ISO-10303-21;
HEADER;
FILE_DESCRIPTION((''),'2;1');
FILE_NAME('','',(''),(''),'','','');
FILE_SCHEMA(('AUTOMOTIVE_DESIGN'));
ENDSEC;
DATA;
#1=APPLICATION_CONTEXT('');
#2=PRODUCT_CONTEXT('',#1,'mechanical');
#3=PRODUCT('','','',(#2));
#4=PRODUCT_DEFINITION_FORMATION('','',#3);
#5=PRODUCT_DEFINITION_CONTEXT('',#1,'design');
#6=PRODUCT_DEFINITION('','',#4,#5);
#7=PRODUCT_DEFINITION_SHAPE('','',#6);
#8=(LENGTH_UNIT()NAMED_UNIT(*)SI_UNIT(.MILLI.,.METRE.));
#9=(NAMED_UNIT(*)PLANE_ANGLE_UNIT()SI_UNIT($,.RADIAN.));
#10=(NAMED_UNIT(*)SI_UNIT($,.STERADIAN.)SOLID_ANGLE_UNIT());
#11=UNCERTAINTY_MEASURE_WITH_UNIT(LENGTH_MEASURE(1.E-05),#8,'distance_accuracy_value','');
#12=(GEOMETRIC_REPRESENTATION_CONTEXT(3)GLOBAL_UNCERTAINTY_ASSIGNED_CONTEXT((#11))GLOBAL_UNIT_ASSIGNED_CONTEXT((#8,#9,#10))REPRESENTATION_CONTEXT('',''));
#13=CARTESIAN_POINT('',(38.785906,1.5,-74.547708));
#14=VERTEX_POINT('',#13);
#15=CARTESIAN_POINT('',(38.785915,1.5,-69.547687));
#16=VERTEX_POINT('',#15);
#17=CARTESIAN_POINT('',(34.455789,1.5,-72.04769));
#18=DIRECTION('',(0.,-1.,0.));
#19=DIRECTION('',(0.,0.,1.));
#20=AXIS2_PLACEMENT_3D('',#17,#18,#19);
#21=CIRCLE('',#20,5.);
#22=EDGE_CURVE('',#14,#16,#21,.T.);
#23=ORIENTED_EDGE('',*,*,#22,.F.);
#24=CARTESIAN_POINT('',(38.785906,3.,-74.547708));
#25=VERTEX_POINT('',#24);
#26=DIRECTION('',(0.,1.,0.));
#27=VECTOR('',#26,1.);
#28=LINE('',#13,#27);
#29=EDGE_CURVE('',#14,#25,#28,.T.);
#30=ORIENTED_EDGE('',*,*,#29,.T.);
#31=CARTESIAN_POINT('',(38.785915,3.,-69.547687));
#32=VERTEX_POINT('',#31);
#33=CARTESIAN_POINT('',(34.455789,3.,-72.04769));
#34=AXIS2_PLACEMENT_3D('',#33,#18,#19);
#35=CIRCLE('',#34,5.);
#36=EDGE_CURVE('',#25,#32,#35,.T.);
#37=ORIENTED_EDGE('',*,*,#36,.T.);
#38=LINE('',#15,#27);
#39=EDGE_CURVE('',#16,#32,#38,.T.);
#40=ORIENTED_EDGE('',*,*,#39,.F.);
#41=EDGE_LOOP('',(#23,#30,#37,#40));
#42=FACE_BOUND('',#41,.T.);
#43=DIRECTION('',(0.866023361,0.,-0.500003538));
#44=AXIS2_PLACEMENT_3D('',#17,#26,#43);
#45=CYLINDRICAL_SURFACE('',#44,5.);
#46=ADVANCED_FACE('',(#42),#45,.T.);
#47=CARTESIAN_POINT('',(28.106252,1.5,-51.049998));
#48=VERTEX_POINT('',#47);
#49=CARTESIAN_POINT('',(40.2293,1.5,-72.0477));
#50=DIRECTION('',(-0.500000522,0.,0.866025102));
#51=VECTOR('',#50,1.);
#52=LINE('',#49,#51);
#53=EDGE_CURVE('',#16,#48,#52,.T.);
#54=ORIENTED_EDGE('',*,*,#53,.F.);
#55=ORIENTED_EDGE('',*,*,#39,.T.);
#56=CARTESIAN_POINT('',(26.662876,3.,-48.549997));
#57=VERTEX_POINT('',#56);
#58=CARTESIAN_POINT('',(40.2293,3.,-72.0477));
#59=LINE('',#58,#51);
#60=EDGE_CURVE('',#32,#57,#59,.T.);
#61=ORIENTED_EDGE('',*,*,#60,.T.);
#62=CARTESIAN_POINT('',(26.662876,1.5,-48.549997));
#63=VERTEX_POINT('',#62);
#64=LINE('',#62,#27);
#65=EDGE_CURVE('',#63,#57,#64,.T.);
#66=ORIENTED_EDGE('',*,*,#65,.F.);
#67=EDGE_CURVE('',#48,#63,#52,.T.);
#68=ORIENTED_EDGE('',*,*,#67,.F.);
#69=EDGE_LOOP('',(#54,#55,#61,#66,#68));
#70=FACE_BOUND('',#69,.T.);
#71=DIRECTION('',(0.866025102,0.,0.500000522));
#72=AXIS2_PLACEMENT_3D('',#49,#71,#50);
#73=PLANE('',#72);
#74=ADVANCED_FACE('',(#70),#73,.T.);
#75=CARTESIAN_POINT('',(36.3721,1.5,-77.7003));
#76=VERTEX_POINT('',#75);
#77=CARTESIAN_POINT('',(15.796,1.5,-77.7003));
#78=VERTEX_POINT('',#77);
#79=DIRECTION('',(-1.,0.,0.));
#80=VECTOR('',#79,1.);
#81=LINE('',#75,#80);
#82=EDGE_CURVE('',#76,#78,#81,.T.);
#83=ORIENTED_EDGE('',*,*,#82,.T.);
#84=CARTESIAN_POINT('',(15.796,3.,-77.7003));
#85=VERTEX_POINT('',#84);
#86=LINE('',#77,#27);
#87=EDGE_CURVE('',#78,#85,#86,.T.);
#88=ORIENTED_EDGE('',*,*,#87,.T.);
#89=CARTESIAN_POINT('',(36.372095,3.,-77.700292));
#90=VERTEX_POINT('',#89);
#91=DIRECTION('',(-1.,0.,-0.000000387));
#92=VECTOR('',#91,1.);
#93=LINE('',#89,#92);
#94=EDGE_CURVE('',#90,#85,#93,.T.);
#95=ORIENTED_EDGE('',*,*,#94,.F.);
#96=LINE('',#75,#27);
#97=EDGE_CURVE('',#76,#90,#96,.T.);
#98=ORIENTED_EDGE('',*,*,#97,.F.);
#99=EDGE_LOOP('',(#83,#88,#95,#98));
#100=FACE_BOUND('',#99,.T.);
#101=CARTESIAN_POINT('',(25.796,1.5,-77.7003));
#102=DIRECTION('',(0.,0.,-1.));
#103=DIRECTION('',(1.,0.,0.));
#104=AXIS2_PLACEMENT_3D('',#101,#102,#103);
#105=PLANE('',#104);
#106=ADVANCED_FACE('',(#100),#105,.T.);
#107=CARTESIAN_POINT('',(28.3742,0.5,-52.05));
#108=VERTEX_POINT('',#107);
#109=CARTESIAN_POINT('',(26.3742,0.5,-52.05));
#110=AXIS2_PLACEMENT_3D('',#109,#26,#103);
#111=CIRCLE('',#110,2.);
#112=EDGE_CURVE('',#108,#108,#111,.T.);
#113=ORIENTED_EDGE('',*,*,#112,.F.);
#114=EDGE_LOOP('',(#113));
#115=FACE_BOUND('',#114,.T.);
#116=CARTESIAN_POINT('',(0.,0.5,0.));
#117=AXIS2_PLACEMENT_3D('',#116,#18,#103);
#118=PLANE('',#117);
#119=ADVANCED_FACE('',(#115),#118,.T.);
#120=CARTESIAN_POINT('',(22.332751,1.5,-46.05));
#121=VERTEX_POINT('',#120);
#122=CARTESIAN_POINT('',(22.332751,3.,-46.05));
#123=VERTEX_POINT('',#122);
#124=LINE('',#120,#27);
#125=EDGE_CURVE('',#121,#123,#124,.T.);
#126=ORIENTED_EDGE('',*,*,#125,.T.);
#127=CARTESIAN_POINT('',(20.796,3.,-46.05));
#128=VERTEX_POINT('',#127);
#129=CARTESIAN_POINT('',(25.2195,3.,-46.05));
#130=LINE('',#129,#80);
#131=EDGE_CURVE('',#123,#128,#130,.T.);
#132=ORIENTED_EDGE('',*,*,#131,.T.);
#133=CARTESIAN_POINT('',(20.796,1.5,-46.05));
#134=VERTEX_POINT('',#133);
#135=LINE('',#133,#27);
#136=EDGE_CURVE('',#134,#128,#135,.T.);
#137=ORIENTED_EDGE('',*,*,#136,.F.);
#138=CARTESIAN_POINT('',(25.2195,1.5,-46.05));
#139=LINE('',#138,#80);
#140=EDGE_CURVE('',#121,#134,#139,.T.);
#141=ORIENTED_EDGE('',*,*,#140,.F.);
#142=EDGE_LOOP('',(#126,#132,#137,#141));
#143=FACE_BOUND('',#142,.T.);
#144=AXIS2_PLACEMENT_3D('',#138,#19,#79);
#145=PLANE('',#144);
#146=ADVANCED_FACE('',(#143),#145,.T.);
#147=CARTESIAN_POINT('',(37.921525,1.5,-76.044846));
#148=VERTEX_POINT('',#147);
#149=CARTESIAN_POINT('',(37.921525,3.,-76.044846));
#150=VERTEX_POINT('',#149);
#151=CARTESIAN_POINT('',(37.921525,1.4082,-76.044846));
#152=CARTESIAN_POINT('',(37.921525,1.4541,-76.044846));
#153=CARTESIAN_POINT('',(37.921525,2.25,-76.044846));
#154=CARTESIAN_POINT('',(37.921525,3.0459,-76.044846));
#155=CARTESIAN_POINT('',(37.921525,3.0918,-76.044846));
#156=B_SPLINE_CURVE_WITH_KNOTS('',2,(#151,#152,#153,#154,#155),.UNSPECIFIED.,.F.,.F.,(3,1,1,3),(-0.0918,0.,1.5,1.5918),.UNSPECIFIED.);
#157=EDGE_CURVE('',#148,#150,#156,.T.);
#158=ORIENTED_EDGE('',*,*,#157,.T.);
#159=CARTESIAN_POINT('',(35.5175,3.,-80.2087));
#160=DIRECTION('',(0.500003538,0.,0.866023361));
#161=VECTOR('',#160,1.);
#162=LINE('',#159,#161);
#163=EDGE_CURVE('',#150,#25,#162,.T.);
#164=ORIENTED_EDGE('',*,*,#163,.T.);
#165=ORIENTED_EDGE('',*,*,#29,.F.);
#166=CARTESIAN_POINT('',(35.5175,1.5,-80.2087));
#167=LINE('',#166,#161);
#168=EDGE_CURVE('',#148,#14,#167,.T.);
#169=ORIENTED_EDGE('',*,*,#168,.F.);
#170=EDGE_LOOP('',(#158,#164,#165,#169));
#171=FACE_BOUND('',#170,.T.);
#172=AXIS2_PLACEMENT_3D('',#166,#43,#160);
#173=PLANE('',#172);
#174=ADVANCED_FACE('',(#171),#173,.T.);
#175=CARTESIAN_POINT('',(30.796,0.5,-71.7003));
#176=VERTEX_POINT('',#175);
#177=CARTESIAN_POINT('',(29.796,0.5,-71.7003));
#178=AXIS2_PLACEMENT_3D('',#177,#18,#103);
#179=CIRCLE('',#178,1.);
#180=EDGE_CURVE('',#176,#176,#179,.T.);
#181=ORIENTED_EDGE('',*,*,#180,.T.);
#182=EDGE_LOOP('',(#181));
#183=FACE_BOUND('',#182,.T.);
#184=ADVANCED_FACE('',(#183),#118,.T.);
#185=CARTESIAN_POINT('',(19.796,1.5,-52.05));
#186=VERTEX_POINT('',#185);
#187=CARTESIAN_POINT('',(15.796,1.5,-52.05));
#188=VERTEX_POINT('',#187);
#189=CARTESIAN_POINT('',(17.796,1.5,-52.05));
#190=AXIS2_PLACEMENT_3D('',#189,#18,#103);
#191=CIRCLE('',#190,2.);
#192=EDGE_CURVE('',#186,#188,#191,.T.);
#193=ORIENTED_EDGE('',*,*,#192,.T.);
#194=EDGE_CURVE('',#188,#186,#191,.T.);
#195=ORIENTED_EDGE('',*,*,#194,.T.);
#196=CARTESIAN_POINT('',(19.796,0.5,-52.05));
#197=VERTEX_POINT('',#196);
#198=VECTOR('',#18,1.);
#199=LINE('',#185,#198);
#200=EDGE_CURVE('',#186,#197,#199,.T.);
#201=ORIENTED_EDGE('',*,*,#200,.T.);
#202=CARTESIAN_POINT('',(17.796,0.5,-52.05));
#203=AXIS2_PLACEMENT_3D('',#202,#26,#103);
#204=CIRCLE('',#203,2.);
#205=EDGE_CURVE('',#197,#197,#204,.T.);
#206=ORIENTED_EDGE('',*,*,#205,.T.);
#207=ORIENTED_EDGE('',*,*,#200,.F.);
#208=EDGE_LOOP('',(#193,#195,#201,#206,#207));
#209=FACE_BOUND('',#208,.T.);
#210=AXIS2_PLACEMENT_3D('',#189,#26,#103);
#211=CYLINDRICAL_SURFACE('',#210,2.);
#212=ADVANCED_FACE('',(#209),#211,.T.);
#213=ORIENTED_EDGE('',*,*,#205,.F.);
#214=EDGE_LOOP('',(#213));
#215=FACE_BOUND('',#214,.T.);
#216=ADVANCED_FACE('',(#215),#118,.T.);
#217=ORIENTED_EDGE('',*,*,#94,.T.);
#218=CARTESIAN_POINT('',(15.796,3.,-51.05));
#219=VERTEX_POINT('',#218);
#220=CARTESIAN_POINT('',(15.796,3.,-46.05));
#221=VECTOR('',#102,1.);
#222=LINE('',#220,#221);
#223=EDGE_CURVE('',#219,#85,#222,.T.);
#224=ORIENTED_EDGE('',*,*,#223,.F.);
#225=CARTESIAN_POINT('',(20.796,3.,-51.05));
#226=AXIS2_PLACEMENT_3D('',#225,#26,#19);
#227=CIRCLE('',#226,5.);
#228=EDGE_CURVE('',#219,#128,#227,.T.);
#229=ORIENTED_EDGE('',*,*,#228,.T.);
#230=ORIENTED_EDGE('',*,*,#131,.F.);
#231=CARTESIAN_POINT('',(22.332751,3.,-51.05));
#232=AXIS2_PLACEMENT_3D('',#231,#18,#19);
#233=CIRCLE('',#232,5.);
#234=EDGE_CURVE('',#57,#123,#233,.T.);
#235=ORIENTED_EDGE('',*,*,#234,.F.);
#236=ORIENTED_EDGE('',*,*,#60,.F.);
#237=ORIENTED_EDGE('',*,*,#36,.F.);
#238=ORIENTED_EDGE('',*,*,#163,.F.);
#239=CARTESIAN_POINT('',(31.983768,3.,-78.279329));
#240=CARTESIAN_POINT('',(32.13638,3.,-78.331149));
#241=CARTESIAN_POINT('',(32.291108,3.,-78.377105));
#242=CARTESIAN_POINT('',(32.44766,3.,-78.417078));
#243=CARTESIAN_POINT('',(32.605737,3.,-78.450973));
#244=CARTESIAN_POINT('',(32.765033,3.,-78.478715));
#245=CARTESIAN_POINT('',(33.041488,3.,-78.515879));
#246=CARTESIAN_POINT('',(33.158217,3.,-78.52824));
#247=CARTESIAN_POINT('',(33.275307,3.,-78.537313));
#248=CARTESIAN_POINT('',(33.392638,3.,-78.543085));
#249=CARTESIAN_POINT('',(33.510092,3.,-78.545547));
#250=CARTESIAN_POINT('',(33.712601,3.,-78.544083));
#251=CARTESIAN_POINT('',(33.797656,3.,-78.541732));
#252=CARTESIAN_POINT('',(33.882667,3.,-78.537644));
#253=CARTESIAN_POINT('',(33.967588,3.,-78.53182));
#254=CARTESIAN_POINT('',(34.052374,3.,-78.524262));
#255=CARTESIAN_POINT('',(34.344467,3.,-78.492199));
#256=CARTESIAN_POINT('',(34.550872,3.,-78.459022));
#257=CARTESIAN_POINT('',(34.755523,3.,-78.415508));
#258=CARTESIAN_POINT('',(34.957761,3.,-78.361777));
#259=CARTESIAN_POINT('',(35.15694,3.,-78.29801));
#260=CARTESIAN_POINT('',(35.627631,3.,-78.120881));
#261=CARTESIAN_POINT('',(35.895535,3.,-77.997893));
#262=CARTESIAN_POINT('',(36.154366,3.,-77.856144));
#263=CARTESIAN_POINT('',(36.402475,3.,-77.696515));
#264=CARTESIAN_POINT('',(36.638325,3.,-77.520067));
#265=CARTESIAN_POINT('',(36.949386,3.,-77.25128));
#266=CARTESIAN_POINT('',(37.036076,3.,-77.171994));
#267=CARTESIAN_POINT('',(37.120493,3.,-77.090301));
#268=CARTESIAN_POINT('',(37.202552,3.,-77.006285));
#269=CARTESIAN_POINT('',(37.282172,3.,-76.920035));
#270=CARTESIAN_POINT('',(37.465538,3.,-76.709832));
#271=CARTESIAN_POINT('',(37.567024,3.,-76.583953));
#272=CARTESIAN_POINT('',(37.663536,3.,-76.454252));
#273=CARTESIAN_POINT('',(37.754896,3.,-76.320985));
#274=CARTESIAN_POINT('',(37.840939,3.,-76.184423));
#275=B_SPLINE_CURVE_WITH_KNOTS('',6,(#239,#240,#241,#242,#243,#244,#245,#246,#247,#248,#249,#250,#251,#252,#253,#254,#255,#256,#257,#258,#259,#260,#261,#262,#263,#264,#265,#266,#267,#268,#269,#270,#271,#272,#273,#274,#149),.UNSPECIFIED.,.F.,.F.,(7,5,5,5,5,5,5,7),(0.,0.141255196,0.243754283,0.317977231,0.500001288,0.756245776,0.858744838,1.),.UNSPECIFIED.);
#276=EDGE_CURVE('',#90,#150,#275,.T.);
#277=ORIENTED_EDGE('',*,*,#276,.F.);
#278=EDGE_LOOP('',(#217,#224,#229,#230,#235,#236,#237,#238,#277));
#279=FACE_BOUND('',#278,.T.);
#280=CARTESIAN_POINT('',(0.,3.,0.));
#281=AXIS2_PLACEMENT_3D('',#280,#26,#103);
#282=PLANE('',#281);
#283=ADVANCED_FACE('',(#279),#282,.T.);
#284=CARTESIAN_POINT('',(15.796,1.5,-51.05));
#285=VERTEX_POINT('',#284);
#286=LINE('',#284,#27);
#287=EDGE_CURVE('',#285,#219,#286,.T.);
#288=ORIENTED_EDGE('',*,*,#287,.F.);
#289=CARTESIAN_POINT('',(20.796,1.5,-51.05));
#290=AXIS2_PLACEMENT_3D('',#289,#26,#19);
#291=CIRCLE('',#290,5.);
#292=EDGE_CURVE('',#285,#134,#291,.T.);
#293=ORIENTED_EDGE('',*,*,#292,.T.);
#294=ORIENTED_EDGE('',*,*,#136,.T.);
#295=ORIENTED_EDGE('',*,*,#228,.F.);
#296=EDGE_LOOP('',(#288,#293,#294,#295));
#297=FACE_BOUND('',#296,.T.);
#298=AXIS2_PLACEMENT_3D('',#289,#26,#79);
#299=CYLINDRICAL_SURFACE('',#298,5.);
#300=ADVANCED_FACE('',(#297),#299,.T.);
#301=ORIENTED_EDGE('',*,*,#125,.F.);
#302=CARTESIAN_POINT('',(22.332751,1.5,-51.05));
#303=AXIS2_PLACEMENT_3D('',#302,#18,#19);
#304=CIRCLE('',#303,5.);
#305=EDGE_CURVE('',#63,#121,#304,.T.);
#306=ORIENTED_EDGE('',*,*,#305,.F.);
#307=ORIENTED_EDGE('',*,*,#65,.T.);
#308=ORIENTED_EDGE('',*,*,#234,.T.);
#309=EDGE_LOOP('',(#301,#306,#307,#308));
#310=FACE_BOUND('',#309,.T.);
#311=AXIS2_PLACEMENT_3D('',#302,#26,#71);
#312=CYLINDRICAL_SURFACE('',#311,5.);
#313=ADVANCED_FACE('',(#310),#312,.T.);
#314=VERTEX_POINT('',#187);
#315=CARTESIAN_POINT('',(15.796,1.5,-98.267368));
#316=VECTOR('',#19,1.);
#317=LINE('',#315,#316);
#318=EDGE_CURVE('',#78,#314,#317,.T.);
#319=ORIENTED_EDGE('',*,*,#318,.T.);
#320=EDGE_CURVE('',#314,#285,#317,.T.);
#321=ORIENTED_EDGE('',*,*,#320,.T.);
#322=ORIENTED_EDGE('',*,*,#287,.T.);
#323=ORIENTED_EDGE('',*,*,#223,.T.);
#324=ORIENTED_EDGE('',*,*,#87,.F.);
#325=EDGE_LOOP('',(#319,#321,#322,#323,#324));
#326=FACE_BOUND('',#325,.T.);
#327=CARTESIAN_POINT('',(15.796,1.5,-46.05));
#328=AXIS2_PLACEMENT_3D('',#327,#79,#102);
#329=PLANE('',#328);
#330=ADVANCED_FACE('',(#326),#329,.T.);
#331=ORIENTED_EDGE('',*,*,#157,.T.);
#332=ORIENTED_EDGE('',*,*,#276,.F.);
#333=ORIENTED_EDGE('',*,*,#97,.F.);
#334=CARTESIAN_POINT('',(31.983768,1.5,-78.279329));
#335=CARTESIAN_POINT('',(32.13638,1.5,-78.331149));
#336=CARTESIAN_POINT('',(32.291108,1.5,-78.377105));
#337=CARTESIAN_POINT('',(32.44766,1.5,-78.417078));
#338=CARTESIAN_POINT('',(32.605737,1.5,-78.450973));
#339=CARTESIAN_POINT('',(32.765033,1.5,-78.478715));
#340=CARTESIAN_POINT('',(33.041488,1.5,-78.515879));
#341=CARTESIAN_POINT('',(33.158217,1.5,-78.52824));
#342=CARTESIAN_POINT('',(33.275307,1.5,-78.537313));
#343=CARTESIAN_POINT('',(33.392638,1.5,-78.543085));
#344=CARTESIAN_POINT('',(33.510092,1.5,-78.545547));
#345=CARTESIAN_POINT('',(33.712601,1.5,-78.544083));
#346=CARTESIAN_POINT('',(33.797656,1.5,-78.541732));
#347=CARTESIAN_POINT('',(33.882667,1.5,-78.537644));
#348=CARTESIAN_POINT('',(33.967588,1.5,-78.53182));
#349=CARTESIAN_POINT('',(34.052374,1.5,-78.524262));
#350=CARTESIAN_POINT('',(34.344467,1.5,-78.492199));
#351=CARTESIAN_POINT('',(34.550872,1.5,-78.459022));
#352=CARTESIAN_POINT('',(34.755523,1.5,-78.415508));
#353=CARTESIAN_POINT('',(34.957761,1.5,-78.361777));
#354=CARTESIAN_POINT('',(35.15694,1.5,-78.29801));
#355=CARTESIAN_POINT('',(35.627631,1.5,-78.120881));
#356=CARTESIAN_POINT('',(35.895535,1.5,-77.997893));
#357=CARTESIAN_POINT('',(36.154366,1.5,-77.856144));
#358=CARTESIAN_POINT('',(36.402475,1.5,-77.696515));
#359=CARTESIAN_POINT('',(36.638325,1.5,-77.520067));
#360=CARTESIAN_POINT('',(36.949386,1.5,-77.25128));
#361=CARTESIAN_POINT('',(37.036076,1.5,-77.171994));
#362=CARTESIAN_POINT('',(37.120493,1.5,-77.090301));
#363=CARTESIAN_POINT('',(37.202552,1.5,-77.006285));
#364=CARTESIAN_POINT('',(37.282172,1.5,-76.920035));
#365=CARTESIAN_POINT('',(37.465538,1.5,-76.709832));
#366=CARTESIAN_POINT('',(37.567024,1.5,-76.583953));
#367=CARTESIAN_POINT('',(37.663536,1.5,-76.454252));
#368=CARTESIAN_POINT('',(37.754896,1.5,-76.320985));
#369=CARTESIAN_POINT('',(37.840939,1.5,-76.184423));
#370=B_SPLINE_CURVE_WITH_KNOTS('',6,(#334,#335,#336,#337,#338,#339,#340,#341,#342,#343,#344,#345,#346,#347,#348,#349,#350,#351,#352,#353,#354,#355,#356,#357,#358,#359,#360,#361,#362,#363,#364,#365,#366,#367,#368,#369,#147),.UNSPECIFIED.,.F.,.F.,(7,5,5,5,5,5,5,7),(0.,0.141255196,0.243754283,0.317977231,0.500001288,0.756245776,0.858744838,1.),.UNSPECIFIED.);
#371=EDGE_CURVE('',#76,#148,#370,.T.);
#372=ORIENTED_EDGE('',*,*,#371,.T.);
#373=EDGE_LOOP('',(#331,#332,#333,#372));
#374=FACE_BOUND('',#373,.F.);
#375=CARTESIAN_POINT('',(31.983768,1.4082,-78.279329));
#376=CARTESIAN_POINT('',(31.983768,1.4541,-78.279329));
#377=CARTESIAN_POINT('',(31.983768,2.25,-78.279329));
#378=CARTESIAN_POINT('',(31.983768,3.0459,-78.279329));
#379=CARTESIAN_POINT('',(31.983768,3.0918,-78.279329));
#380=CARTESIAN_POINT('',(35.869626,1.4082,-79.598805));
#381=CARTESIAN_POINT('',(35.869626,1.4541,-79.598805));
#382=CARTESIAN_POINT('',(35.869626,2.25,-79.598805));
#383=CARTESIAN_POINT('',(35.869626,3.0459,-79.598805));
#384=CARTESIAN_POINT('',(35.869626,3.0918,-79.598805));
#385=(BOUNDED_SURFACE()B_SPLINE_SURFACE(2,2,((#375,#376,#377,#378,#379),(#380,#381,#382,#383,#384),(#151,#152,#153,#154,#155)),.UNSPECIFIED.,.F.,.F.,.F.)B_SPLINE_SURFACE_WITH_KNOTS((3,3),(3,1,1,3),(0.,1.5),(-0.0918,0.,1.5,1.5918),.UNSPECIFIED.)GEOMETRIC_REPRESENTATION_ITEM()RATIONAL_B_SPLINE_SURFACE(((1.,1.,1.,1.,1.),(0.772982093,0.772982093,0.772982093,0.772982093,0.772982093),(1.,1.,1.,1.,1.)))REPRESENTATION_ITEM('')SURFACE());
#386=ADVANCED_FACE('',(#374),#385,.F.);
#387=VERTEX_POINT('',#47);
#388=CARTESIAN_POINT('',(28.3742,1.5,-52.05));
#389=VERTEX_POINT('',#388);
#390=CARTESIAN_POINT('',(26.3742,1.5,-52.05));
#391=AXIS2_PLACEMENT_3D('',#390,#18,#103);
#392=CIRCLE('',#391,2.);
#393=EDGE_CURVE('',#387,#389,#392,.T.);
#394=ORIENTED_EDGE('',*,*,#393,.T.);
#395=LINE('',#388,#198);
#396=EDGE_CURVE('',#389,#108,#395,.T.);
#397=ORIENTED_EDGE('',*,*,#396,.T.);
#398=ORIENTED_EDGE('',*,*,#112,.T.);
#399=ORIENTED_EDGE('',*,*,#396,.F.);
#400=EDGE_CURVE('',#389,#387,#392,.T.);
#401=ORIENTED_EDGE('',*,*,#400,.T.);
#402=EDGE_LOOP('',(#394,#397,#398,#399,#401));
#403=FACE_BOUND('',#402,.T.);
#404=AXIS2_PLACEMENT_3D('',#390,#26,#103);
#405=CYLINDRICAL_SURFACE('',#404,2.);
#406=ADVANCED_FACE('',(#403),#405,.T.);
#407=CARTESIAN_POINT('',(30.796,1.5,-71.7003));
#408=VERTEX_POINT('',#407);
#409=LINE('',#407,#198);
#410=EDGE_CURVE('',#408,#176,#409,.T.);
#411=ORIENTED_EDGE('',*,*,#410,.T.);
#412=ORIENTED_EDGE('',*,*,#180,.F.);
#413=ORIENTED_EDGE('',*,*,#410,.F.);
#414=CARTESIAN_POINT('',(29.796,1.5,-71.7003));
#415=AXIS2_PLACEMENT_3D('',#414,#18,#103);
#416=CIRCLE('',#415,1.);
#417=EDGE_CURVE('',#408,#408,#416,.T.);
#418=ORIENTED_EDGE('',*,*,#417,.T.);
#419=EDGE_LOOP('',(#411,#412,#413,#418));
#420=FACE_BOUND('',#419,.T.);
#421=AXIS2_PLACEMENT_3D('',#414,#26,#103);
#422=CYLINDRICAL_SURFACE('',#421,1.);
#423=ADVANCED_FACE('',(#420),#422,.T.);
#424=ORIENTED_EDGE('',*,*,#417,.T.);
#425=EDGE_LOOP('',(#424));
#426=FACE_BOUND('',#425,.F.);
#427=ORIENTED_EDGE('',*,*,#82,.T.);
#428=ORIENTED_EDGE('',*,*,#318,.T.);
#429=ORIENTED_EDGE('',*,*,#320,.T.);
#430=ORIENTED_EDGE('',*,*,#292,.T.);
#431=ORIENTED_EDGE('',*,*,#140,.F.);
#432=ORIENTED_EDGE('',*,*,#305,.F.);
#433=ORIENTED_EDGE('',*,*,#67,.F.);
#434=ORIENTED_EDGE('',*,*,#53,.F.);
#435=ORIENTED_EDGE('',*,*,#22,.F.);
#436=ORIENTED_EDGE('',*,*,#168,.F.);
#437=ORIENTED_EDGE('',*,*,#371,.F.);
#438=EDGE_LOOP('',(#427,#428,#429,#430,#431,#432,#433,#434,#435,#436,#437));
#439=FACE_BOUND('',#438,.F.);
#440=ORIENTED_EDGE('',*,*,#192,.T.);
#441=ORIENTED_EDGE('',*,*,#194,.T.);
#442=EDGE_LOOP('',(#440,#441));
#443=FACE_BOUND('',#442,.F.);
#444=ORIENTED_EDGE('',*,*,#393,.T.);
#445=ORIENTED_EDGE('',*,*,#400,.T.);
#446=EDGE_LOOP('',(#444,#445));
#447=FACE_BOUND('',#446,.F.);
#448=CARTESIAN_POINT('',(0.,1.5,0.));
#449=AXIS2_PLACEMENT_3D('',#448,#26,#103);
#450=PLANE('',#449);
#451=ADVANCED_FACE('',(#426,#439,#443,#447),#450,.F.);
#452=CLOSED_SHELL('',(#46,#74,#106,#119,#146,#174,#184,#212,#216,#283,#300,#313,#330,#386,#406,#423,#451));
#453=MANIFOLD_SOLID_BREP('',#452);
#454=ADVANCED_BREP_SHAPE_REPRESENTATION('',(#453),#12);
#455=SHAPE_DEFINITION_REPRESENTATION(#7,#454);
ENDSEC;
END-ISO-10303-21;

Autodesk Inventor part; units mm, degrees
ref_plane "YZ Plane" through (0, 0, 0) normal (1, 0, 0) x (0, 1, 0)
ref_plane "XZ Plane" through (0, 0, 0) normal (0, 1, 0) x (-1, 0, 0)
ref_plane "XY Plane" through (0, 0, 0) normal (0, 0, 1) x (1, 0, 0)
sketch "スケッチ1" plane through (0, 0, 0) normal (0, 1, 0) x (-1, 0, 0)
  line L0 (75, 0) -> (105, -51.9615)
  line L1 (-75, 0) -> (-105, -51.9615)
  line L2 (0, -218.2384) -> (0, 36.3731)
  line L3 (147, 0) -> (-147, 0)
  line L4 (37.5, -27) -> (-37.5, -27)
  line L5 (105, -51.9615) -> (30, -181.8653)
  line L6 (30, -181.8653) -> (-30, -181.8653)
  line L7 (-30, -181.8653) -> (-105, -51.9615)
  line L8 (75, 0) -> (-75, 0)
  line L9 (-25.3673, -135.8894) -> (-62.8673, -70.9375)
  line L10 (25.3673, -135.8894) -> (62.8673, -70.9375)
  line L11 (-37.5, -27) -> (-27.5, -27)
  line L12 (-27.5, -27) -> (-27.5, -39)
  line L13 (-27.5, -39) -> (-37.5, -39)
  line L14 (-37.5, -39) -> (-37.5, -27)
  line L15 (37.5, -27) -> (27.5, -27)
  line L16 (27.5, -27) -> (27.5, -39)
  line L17 (27.5, -39) -> (37.5, -39)
  line L18 (37.5, -39) -> (37.5, -27)
  line L19 (0, -77.9423) -> (44.1173, -103.4134) construction
  line L20 (0, -77.9423) -> (-44.1173, -103.4134) construction
  line L21 (-44.1173, -103.4134) -> (-67.5, -116.9134) construction
  line L22 (-57.8673, -79.5977) -> (-47.475, -73.5977)
  line L23 (-52.475, -64.9375) -> (-62.8673, -70.9375)
  line L24 (-62.8673, -70.9375) -> (-57.8673, -79.5977)
  line L25 (-47.475, -73.5977) -> (-52.475, -64.9375)
  line L26 (-25.3673, -135.8894) -> (-30.3673, -127.2291)
  line L27 (-19.975, -121.2291) -> (-14.975, -129.8894)
  line L28 (-14.975, -129.8894) -> (-25.3673, -135.8894)
  line L29 (-30.3673, -127.2291) -> (-19.975, -121.2291)
  line L30 (30.3673, -127.2291) -> (19.975, -121.2291)
  line L31 (14.975, -129.8894) -> (25.3673, -135.8894)
  line L32 (25.3673, -135.8894) -> (30.3673, -127.2291)
  line L33 (19.975, -121.2291) -> (14.975, -129.8894)
  line L34 (62.8673, -70.9375) -> (57.8673, -79.5977)
  line L35 (47.475, -73.5977) -> (52.475, -64.9375)
  line L36 (52.475, -64.9375) -> (62.8673, -70.9375)
  line L37 (57.8673, -79.5977) -> (47.475, -73.5977)
  line L38 (62.8673, -70.9375) -> (37.5, -27)
  line L39 (-37.5, -27) -> (-62.8673, -70.9375)
  line L40 (-25.3673, -135.8894) -> (25.3673, -135.8894)
  line L41 (-25.3673, -135.8894) -> (-25.3673, -181.8653)
  line L42 (25.3673, -135.8894) -> (25.3673, -181.8653)
  line L43 (-25.3673, -135.8894) -> (-48.75, -149.3894)
  line L44 (25.3673, -135.8894) -> (48.75, -149.3894)
  point P0 (0, 0)
  point P1 (0, 0)
  point P2 (0, -27)
  dimension "d1" = 150
  dimension "d2" = 60
  dimension "d3" = 60
  dimension "d4" = 27
  dimension "d5" = 75
  dimension "d6" = 60
  dimension "d7" = 27
  dimension "d8" = 10
  dimension "d9" = 12
  dimension "d10" = 10
  dimension "d11" = 12
  dimension "d14" = 360
extrude "プレート1" add sketch "スケッチ1" along normal blind 1.5 contours L5 L6 L42 L44 | L4 L16 L17 L18 L38 L36 L35 L37 L10 L30 L33 L31 L40 L2 | L2 L40 L28 L27 L29 L9 L22 L25 L23 L39 L14 L13 L12 L4 | L31 L33 L30 L10 | L42 L6 L2 L40 | L2 L6 L41 L40 | L4 L18 L17 L16 | L12 L13 L14 L4 | L9 L29 L27 L28 | L41 L6 L7 L43 | L37 L35 L36 L10 | L23 L25 L22 L9
sketch "スケッチ2" plane through (0, 0, 0) normal (0, -1, 0) x (1, 0, 0)
  line L0 (23.3798, -38.55) -> (-23.3798, -38.55) projected
  line L1 (8.2, -46.6) -> (-8.2, -46.6) projected
  arc A0 (-21.1, -27) -> (-23.3798, -38.55) centre (-21.1, -33) ccw projected
  line L2 (-27.5, -27) -> (-27.5, -39) projected
  line L3 (27.5, -39) -> (27.5, -27) projected
  line L4 (-27.5, -39) -> (-27.5, -40.55)
  line L5 (-27.5, -40.55) -> (-10.2, -40.55)
  line L6 (-10.2, -40.55) -> (-10.2, -48.6)
  line L7 (-10.2, -48.6) -> (10.2, -48.6)
  line L8 (10.2, -48.6) -> (10.2, -40.55)
  line L9 (10.2, -40.55) -> (27.5, -40.55)
  line L10 (27.5, -40.55) -> (27.5, -39)
  line L11 (-37.5, -27) -> (-27.5, -27) projected
  line L12 (-37.5, -27) -> (37.5, -27) projected
  line L13 (-20.3112, -101.4469) -> (-30.5112, -83.78)
  line L14 (-27.2827, -105.4719) -> (-20.3112, -101.4469)
  line L15 (-18.6327, -120.4541) -> (-27.2827, -105.4719)
  line L16 (-19.975, -121.2291) -> (-18.6327, -120.4541)
  line L17 (-37.4827, -87.805) -> (-46.1327, -72.8227)
  line L18 (-46.1327, -72.8227) -> (-47.475, -73.5977)
  line L19 (-30.5112, -83.78) -> (-37.4827, -87.805)
  line L20 (30.5112, -83.78) -> (20.3112, -101.4469)
  line L21 (37.4827, -87.805) -> (30.5112, -83.78)
  line L22 (46.1327, -72.8227) -> (37.4827, -87.805)
  line L23 (47.475, -73.5977) -> (46.1327, -72.8227)
  line L24 (27.2827, -105.4719) -> (18.6327, -120.4541)
  line L25 (18.6327, -120.4541) -> (19.975, -121.2291)
  line L26 (20.3112, -101.4469) -> (27.2827, -105.4719)
  line L27 (-47.475, -73.5977) -> (-57.8673, -79.5977)
  line L28 (-57.8673, -79.5977) -> (-30.3673, -127.2291)
  line L29 (-30.3673, -127.2291) -> (-19.975, -121.2291)
  line L30 (19.975, -121.2291) -> (30.3673, -127.2291)
  line L31 (30.3673, -127.2291) -> (57.8673, -79.5977)
  line L32 (57.8673, -79.5977) -> (47.475, -73.5977)
  point P0 (0, 0)
  point P1 (0, -77.9423)
  point P2 (-23.0432, -100.7148)
  point P3 (-33.5673, -121.6866)
  point P4 (-22.4248, -117.8859)
  point P5 (-25.3673, -135.8894)
  point P6 (-28.3712, -118.6866)
  point P7 (-31.2432, -86.512)
  point P8 (-45.8046, -77.3909)
  point P9 (-62.8673, -70.9375)
  point P10 (31.2432, -86.512)
  point P11 (54.6673, -85.1403)
  point P12 (45.8046, -77.3909)
  point P13 (62.8673, -70.9375)
  point P14 (49.4712, -82.1403)
  point P15 (23.0432, -100.7148)
  point P16 (22.4248, -117.8859)
  point P17 (25.3673, -135.8894)
  dimension "d17" = 2
  dimension "d18" = 2
  dimension "d19" = 2
  dimension "d20" = 2
  dimension "d26" = 360
extrude "切り取り1" cut sketch "スケッチ2" against normal blind 1.5
fillet "フィレット1" radius 1.5 18 edges at (-10.2, 0.75, -48.6) (-10.2, 0.75, -40.55) (-27.5, 0.75, -40.55) (10.2, 0.75, -48.6) (10.2, 0.75, -40.55) (27.5, 0.75, -40.55) (-30.5112, 0.75, -83.78) (-46.1327, 0.75, -72.8227) (-20.3112, 0.75, -101.4469) (-27.2827, 0.75, -105.4719) (-37.4827, 0.75, -87.805) (-18.6327, 0.75, -120.4541) (20.3112, 0.75, -101.4469) (27.2827, 0.75, -105.4719) (18.6327, 0.75, -120.4541) (30.5112, 0.75, -83.78) (37.4827, 0.75, -87.805) (46.1327, 0.75, -72.8227)
sketch "スケッチ3" plane through (0, 0, 0) normal (0, -1, 0) x (1, 0, 0)
  circle A0 centre (40.9875, -45.0405) radius 1.6 projected
  circle A1 centre (48.9875, -58.8969) radius 1.6 projected
  circle A2 centre (8, -129.8894) radius 1.6 projected
  circle A3 centre (-8, -129.8894) radius 1.6 projected
  circle A4 centre (-48.9875, -58.8969) radius 1.6 projected
  circle A5 centre (-40.9875, -45.0405) radius 1.6 projected
  point P0 (0, 0)
extrude "切り取り2" cut sketch "スケッチ3" against normal blind 1.5
sketch "スケッチ4" plane through (0, 0, 0) normal (0, -1, 0) x (1, 0, 0)
  circle A0 centre (10, -176.8653) radius 1.35 projected
  circle A1 centre (21.2333, -145.0496) radius 1.6 projected
  circle A2 centre (10, -143.8894) radius 1.6 projected
  line L0 (52.75, -142.4612) -> (30, -181.8653) projected
  line L1 (52.75, -142.4612) -> (33.6974, -131.4612) projected
  line L2 (33.6974, -131.4612) -> (27.1974, -142.7195) projected
  line L3 (27.1974, -142.7195) -> (20.5635, -138.8894) projected
  line L4 (20.5635, -138.8894) -> (5, -138.8894) projected
  line L5 (5, -138.8894) -> (5, -181.8653) projected
  line L6 (30, -181.8653) -> (5, -181.8653) projected
  circle A3 centre (-10, -176.8653) radius 1.35 projected
  circle A4 centre (-21.2333, -145.0496) radius 1.6 projected
  circle A5 centre (-10, -143.8894) radius 1.6 projected
  line L7 (-12.9295, -171.4323) -> (-35.4295, -132.4612) projected
  line L8 (-30.25, -181.4323) -> (-12.9295, -171.4323) projected
  line L9 (-30, -181.8653) -> (-30.25, -181.4323) projected
  line L10 (-30, -181.8653) -> (-5, -181.8653) projected
  line L11 (-5, -181.8653) -> (-5, -138.8894) projected
  line L12 (-5, -138.8894) -> (-20.5635, -138.8894) projected
  line L13 (-20.5635, -138.8894) -> (-27.1974, -142.7195) projected
  line L14 (-33.6974, -131.4612) -> (-27.1974, -142.7195) projected
  line L15 (-35.4295, -132.4612) -> (-33.6974, -131.4612) projected
  point P0 (0, 0)
extrude "切り取り3" cut sketch "スケッチ4" against normal blind 1.5 contours A0 | A1 | A2 | A3 | A4 | A5
sketch "スケッチ5" plane through (0, 1.5, 0) normal (0, 1, 0) x (1, 0, 0)
  line L0 (-19.975, 121.2291) -> (19.975, 121.2291) projected
  line L1 (47.475, 73.5977) -> (27.5, 39) projected
  line L2 (-47.475, 73.5977) -> (-27.5, 39) projected
  point P0 (0, 0)
sketch "スケッチ6" plane through (0, 1.5, 0) normal (0, 1, 0) x (1, 0, 0)
  line L0 (-26.0855, 44.55) -> (-41.9613, 72.0477)
  line L1 (-41.9613, 72.0477) -> (-36.0186, 82.3409)
  line L2 (-36.0186, 82.3409) -> (-29.0471, 78.3159)
  line L3 (-29.0471, 78.3159) -> (-14.8471, 102.911)
  line L4 (-14.8471, 102.911) -> (-21.8186, 106.936)
  line L5 (-21.8186, 106.936) -> (-15.8758, 117.2291)
  line L6 (-15.8758, 117.2291) -> (15.8758, 117.2291)
  line L7 (15.8758, 117.2291) -> (21.8186, 106.936)
  line L8 (21.8186, 106.936) -> (14.8471, 102.911)
  line L9 (14.8471, 102.911) -> (29.0471, 78.3159)
  line L10 (29.0471, 78.3159) -> (36.0186, 82.3409)
  line L11 (36.0186, 82.3409) -> (41.9613, 72.0477)
  line L12 (41.9613, 72.0477) -> (26.0855, 44.55)
  line L13 (26.0855, 44.55) -> (14.2, 44.55)
  line L14 (14.2, 44.55) -> (14.2, 52.6)
  line L15 (14.2, 52.6) -> (-14.2, 52.6)
  line L16 (-14.2, 52.6) -> (-14.2, 44.55)
  line L17 (-14.2, 44.55) -> (-26.0855, 44.55)
  line L18 (-47.475, 73.5977) -> (-27.5, 39) projected
  line L19 (-38.2327, 86.5059) -> (-45.3827, 74.1218) projected
  line L20 (-31.8102, 84.53) -> (-36.1836, 87.055) projected
  line L21 (-21.0612, 100.1479) -> (-29.7612, 85.079) projected
  line L22 (-25.9836, 104.7219) -> (-21.6102, 102.1969) projected
  line L23 (-19.3827, 119.1551) -> (-26.5327, 106.7709) projected
  line L24 (-19.975, 121.2291) -> (19.975, 121.2291) projected
  line L25 (47.475, 73.5977) -> (27.5, 39) projected
  line L26 (26.5327, 106.7709) -> (19.3827, 119.1551) projected
  line L27 (21.6102, 102.1969) -> (25.9836, 104.7219) projected
  line L28 (29.7612, 85.079) -> (21.0612, 100.1479) projected
  line L29 (36.1836, 87.055) -> (31.8102, 84.53) projected
  line L30 (45.3827, 74.1218) -> (38.2327, 86.5059) projected
  line L31 (11.7, 40.55) -> (26, 40.55) projected
  line L32 (10.2, 47.1) -> (10.2, 42.05) projected
  line L33 (-8.7, 48.6) -> (8.7, 48.6) projected
  line L34 (-10.2, 42.05) -> (-10.2, 47.1) projected
  line L35 (-26, 40.55) -> (-11.7, 40.55) projected
  line L36 (0, 48.6) -> (0, 121.2291)
  line L37 (-25.4112, 92.6134) -> (-31.0836, 95.8884) construction
  point P0 (0, 0)
  dimension "d32" = 4
  dimension "d33" = 4
  dimension "d34" = 4
  dimension "d35" = 4
  dimension "d36" = 4
  dimension "d37" = 4
  dimension "d38" = 4
  dimension "d39" = 4
  dimension "d40" = 4
extrude "切り取り4" cut sketch "スケッチ6" against normal blind 1.5
fillet "フィレット2" radius 5 9 edges at (-14.2, 0.75, -44.55) (-26.0855, 0.75, -44.55) (-41.9613, 0.75, -72.0477) (-36.0186, 0.75, -82.3409) (-21.8186, 0.75, -106.936) (-15.8758, 0.75, -117.2291) (-14.2, 0.75, -52.6) (-29.0471, 0.75, -78.3159) (-14.8471, 0.75, -102.911)
mirror "ミラー1" about plane through (0, 0, 0) normal (1, 0, 0) of "フィレット2"
sketch "スケッチ7" plane through (0, 1.5, 0) normal (0, 1, 0) x (1, 0, 0)
  arc A0 (18.2848, 105.0066) -> (17.2511, 98.7471) centre (21.5812, 101.2471) ccw projected
  line L0 (17.2511, 98.7471) -> (26.643, 82.4797) projected
  arc A1 (26.643, 82.4797) -> (32.5808, 80.2452) centre (30.9732, 84.9797) ccw projected
  arc A2 (38.5186, 78.0107) -> (32.5808, 80.2452) centre (34.1884, 75.5107) ccw projected
  line L1 (38.5186, 78.0107) -> (40.5179, 74.5477) projected
  arc A3 (40.5179, 69.5477) -> (40.5179, 74.5477) centre (36.1878, 72.0477) ccw projected
  line L2 (40.5179, 69.5477) -> (27.5289, 47.05) projected
  arc A4 (23.1987, 44.55) -> (27.5289, 47.05) centre (23.1987, 49.55) ccw projected
  line L3 (23.1987, 44.55) -> (19.2, 44.55) projected
  arc A5 (14.296, 48.575) -> (19.2, 44.55) centre (19.2, 49.55) ccw projected
  arc A6 (14.296, 48.575) -> (9.392, 52.6) centre (9.392, 47.6) ccw projected
  line L4 (9.392, 52.6) -> (-9.392, 52.6) projected
  arc A7 (-9.392, 52.6) -> (-14.296, 48.575) centre (-9.392, 47.6) ccw projected
  arc A8 (-19.2, 44.55) -> (-14.296, 48.575) centre (-19.2, 49.55) ccw projected
  line L5 (-19.2, 44.55) -> (-23.1987, 44.55) projected
  arc A9 (-27.5289, 47.05) -> (-23.1987, 44.55) centre (-23.1987, 49.55) ccw projected
  line L6 (-27.5289, 47.05) -> (-40.5179, 69.5477) projected
  arc A10 (-40.5179, 74.5477) -> (-40.5179, 69.5477) centre (-36.1878, 72.0477) ccw projected
  line L7 (-40.5179, 74.5477) -> (-38.5186, 78.0107) projected
  arc A11 (-32.5808, 80.2452) -> (-38.5186, 78.0107) centre (-34.1884, 75.5107) ccw projected
  arc A12 (-32.5808, 80.2452) -> (-26.643, 82.4797) centre (-30.9732, 84.9797) ccw projected
  line L8 (-26.643, 82.4797) -> (-17.2511, 98.7471) projected
  arc A13 (-17.2511, 98.7471) -> (-18.2848, 105.0066) centre (-21.5812, 101.2471) ccw projected
  arc A14 (-19.3186, 111.2661) -> (-18.2848, 105.0066) centre (-14.9884, 108.7661) ccw projected
  line L9 (-19.3186, 111.2661) -> (-17.3192, 114.7291) projected
  arc A15 (-12.9891, 117.2291) -> (-17.3192, 114.7291) centre (-12.9891, 112.2291) ccw projected
  line L10 (-12.9891, 117.2291) -> (12.9891, 117.2291) projected
  arc A16 (17.3192, 114.7291) -> (12.9891, 117.2291) centre (12.9891, 112.2291) ccw projected
  line L11 (17.3192, 114.7291) -> (19.3186, 111.2661) projected
  arc A17 (18.2848, 105.0066) -> (19.3186, 111.2661) centre (14.9884, 108.7661) ccw projected
  circle A18 centre (21.2333, 145.0496) radius 1.6 projected
  circle A19 centre (-10, 143.8894) radius 1.6 projected
  circle A20 centre (-10, 176.8653) radius 1.35 projected
  circle A21 centre (-21.2333, 145.0496) radius 1.6 projected
  circle A22 centre (10, 176.8653) radius 1.35 projected
  circle A23 centre (10, 143.8894) radius 1.6 projected
  circle A24 centre (-48.9875, 58.8969) radius 1.6 projected
  circle A25 centre (8, 129.8894) radius 1.6 projected
  circle A26 centre (40.9875, 45.0405) radius 1.6 projected
  circle A27 centre (48.9875, 58.8969) radius 1.6 projected
  circle A28 centre (-8, 129.8894) radius 1.6 projected
  circle A29 centre (-40.9875, 45.0405) radius 1.6 projected
  arc A30 (38.2327, 86.5059) -> (36.1836, 87.055) centre (36.9336, 85.7559) ccw projected
  line L12 (36.1836, 87.055) -> (31.8102, 84.53) projected
  arc A31 (29.7612, 85.079) -> (31.8102, 84.53) centre (31.0602, 85.829) ccw projected
  line L13 (29.7612, 85.079) -> (21.0612, 100.1479) projected
  arc A32 (21.6102, 102.1969) -> (21.0612, 100.1479) centre (22.3602, 100.8979) ccw projected
  line L14 (21.6102, 102.1969) -> (25.9836, 104.7219) projected
  arc A33 (25.9836, 104.7219) -> (26.5327, 106.7709) centre (25.2336, 106.0209) ccw projected
  line L15 (26.5327, 106.7709) -> (19.3827, 119.1551) projected
  arc A34 (19.9317, 121.2041) -> (19.3827, 119.1551) centre (20.6817, 119.9051) ccw projected
  line L16 (19.9317, 121.2041) -> (30.3673, 127.2291) projected
  line L17 (25.3673, 135.8894) -> (30.3673, 127.2291) projected
  line L18 (48.75, 149.3894) -> (25.3673, 135.8894) projected
  line L19 (30, 181.8653) -> (48.75, 149.3894) projected
  line L20 (-30, 181.8653) -> (30, 181.8653) projected
  line L21 (-48.75, 149.3894) -> (-30, 181.8653) projected
  line L22 (-25.3673, 135.8894) -> (-48.75, 149.3894) projected
  line L23 (-30.3673, 127.2291) -> (-25.3673, 135.8894) projected
  line L24 (-30.3673, 127.2291) -> (-19.9317, 121.2041) projected
  arc A35 (-19.3827, 119.1551) -> (-19.9317, 121.2041) centre (-20.6817, 119.9051) ccw projected
  line L25 (-19.3827, 119.1551) -> (-26.5327, 106.7709) projected
  arc A36 (-26.5327, 106.7709) -> (-25.9836, 104.7219) centre (-25.2336, 106.0209) ccw projected
  line L26 (-25.9836, 104.7219) -> (-21.6102, 102.1969) projected
  arc A37 (-21.0612, 100.1479) -> (-21.6102, 102.1969) centre (-22.3602, 100.8979) ccw projected
  line L27 (-21.0612, 100.1479) -> (-29.7612, 85.079) projected
  arc A38 (-31.8102, 84.53) -> (-29.7612, 85.079) centre (-31.0602, 85.829) ccw projected
  line L28 (-31.8102, 84.53) -> (-36.1836, 87.055) projected
  arc A39 (-36.1836, 87.055) -> (-38.2327, 86.5059) centre (-36.9336, 85.7559) ccw projected
  line L29 (-38.2327, 86.5059) -> (-45.3827, 74.1218) projected
  arc A40 (-47.4317, 73.5727) -> (-45.3827, 74.1218) centre (-46.6817, 74.8718) ccw projected
  line L30 (-47.4317, 73.5727) -> (-57.8673, 79.5977) projected
  line L31 (-62.8673, 70.9375) -> (-57.8673, 79.5977) projected
  line L32 (-37.5, 27) -> (-62.8673, 70.9375) projected
  line L33 (-27.5, 27) -> (-37.5, 27) projected
  line L34 (-27.5, 27) -> (-27.5, 39.05) projected
  arc A41 (-26, 40.55) -> (-27.5, 39.05) centre (-26, 39.05) ccw projected
  line L35 (-26, 40.55) -> (-11.7, 40.55) projected
  arc A42 (-11.7, 40.55) -> (-10.2, 42.05) centre (-11.7, 42.05) ccw projected
  line L36 (-10.2, 42.05) -> (-10.2, 47.1) projected
  arc A43 (-8.7, 48.6) -> (-10.2, 47.1) centre (-8.7, 47.1) ccw projected
  line L37 (-8.7, 48.6) -> (8.7, 48.6) projected
  arc A44 (10.2, 47.1) -> (8.7, 48.6) centre (8.7, 47.1) ccw projected
  line L38 (10.2, 47.1) -> (10.2, 42.05) projected
  arc A45 (10.2, 42.05) -> (11.7, 40.55) centre (11.7, 42.05) ccw projected
  line L39 (11.7, 40.55) -> (26, 40.55) projected
  arc A46 (27.5, 39.05) -> (26, 40.55) centre (26, 39.05) ccw projected
  line L40 (27.5, 39.05) -> (27.5, 27) projected
  line L41 (37.5, 27) -> (27.5, 27) projected
  line L42 (62.8673, 70.9375) -> (37.5, 27) projected
  line L43 (57.8673, 79.5977) -> (62.8673, 70.9375) projected
  line L44 (57.8673, 79.5977) -> (47.4317, 73.5727) projected
  arc A47 (45.3827, 74.1218) -> (47.4317, 73.5727) centre (46.6817, 74.8718) ccw projected
  line L45 (45.3827, 74.1218) -> (38.2327, 86.5059) projected
  line L46 (25.2195, 46.05) -> (15.796, 46.05)
  line L47 (15.796, 46.05) -> (15.796, 54.1)
  line L48 (15.796, 54.1) -> (-15.796, 54.1)
  line L49 (-15.796, 54.1) -> (-15.796, 46.05)
  line L50 (-15.796, 46.05) -> (-25.2195, 46.05)
  line L51 (-25.2195, 46.05) -> (-40.2293, 72.0477)
  line L52 (-40.2293, 72.0477) -> (-35.5175, 80.2087)
  line L53 (-35.5175, 80.2087) -> (-28.546, 76.1837)
  line L54 (-28.546, 76.1837) -> (-12.75, 103.5432)
  line L55 (-12.75, 103.5432) -> (-19.7215, 107.5682)
  line L56 (-19.7215, 107.5682) -> (-15.0098, 115.7291)
  line L57 (-15.0098, 115.7291) -> (15.0098, 115.7291)
  line L58 (15.0098, 115.7291) -> (19.7215, 107.5682)
  line L59 (19.7215, 107.5682) -> (12.75, 103.5432)
  line L60 (12.75, 103.5432) -> (28.546, 76.1837)
  line L61 (28.546, 76.1837) -> (35.5175, 80.2087)
  line L62 (35.5175, 80.2087) -> (40.2293, 72.0477)
  line L63 (40.2293, 72.0477) -> (25.2195, 46.05)
  line L64 (0, 54.1) -> (0, 115.7291) construction
  line L65 (0, 218.2384) -> (0, -36.3731) construction
  line L66 (40.5179, 69.5477) -> (27.5289, 47.05) projected
  line L67 (20.648, 89.8634) -> (0, 77.9423) construction
  line L68 (0, 54.1) -> (0, 77.9423) construction
  line L69 (17.3192, 114.7291) -> (19.3186, 111.2661) projected
  point P0 (0, 0)
  dimension "d44" = 1.5
  dimension "d45" = 1.5
  dimension "d46" = 1.5
  dimension "d47" = 1.5
  dimension "d48" = 1.5
  dimension "d49" = 1.5
  dimension "d50" = 1.5
  dimension "d51" = 1.5
extrude "押し出し1" cut sketch "スケッチ7" against normal through all contours A0 L0 A1 A2 L1 A3 L2 A4 L3 A5 A6 L4 A7 A8 L5 A9 L6 A10 L7 A11 A12 L8 A13 A14 L9 A15 L10 A16 L11 A17 | L45 A47 L44 L43 L42 L41 L40 A46 L39 A45 L38 A44 L37 A43 L36 A42 L35 A41 L34 L33 L32 L31 L30 A40 L29 A39 L28 A38 L27 A37 L26 A36 L25 A35 L24 L23 L22 L21 L20 L19 L18 L17 L16 A34 L15 A33 L14 A32 L13 A31 L12 A30 | L46 L47 L48 L49 L50 L51 L52 L53 L54 L55 L56 L57 L58 L59 L60 L61 L62 L63
extrude "押し出し2" add sketch "スケッチ7" along normal blind 1.5 contours L46 L47 L48 L49 L50 L51 L52 L53 L54 L55 L56 L57 L58 L59 L60 L61 L62 L63
sketch "スケッチ8" plane through (0, 3, 0) normal (0, 1, 0) x (1, 0, 0)
  line L0 (15, 59.1) -> (-15, 59.1)
  line L1 (-15, 59.1) -> (-15, 124.1)
  line L2 (-15, 124.1) -> (15, 124.1)
  line L3 (15, 124.1) -> (15, 59.1)
  line L4 (-15.796, 54.1) -> (15.796, 54.1) projected
  line L5 (15.0098, 115.7291) -> (-15.0098, 115.7291) projected
  line L6 (15, 59.1) -> (15, 54.1)
  line L7 (-15.796, 46.05) -> (-15.796, 54.1) projected
  line L8 (-25.2195, 46.05) -> (-15.796, 46.05) projected
  line L9 (-40.2293, 72.0477) -> (-25.2195, 46.05) projected
  line L10 (-35.5175, 80.2087) -> (-40.2293, 72.0477) projected
  line L11 (-28.546, 76.1837) -> (-35.5175, 80.2087) projected
  line L12 (-12.75, 103.5432) -> (-28.546, 76.1837) projected
  line L13 (-19.7215, 107.5682) -> (-12.75, 103.5432) projected
  line L14 (-15.0098, 115.7291) -> (-19.7215, 107.5682) projected
  line L15 (15.796, 54.1) -> (15.796, 114.3674)
  line L16 (19.7215, 107.5682) -> (15.0098, 115.7291) projected
  line L17 (12.75, 103.5432) -> (19.7215, 107.5682) projected
  point P0 (0, 0)
  point P1 (0, 59.1)
  point P2 (0, 54.1)
  point P3 (-15, 115.7291)
  point P4 (15, 115.7291)
  point P5 (-15, 104.8422)
  point P6 (-15, 99.6461)
  point P7 (15.796, 105.3017)
  dimension "d56" = 65
  dimension "d57" = 30
  dimension "d58" = 5
extrude "押し出し3" cut sketch "スケッチ8" against normal through all
fillet "フィレット4" radius 5 5 edges at (28.546, 2.25, -76.1837) (35.5175, 2.25, -80.2087) (40.2293, 2.25, -72.0477) (25.2195, 2.25, -46.05) (15.796, 2.25, -46.05)
fillet "フィレット5" radius 3 1 edges at (15.796, 2.25, -98.2674)
sketch "スケッチ9" plane through (0, 1.5, 0) normal (0, -1, 0) x (1, 0, 0)
  line L0 (11.5, -82.5) -> (11.5, -82.525) projected
  line L1 (11.5, -82.5) -> (14.13, -82.5) projected
  arc A0 (14.13, -82.5) -> (14.18, -82.45) centre (14.13, -82.45) ccw projected
  line L2 (14.18, -82.95) -> (14.18, -82.45) projected
  arc A1 (14.18, -82.95) -> (14.13, -82.9) centre (14.13, -82.95) ccw projected
  line L3 (11.5, -82.9) -> (14.13, -82.9) projected
  line L4 (11.5, -82.875) -> (11.5, -82.9) projected
  line L5 (11.11, -82.875) -> (11.5, -82.875) projected
  arc A2 (11.0667, -82.85) -> (11.11, -82.875) centre (11.11, -82.825) ccw projected
  arc A3 (11.0667, -82.85) -> (11.0234, -82.825) centre (11.0234, -82.875) ccw projected
  line L6 (10.96, -82.825) -> (11.0234, -82.825) projected
  line L7 (10.96, -82.575) -> (10.96, -82.825) projected
  line L8 (11.0234, -82.575) -> (10.96, -82.575) projected
  arc A4 (11.0234, -82.575) -> (11.0667, -82.55) centre (11.0234, -82.525) ccw projected
  arc A5 (11.11, -82.525) -> (11.0667, -82.55) centre (11.11, -82.575) ccw projected
  line L9 (11.5, -82.525) -> (11.11, -82.525) projected
  line L10 (13.14, -82.875) -> (13.14, -82.525) projected
  line L11 (13.14, -82.875) -> (13.2786, -82.875) projected
  line L12 (13.2786, -82.875) -> (13.2786, -82.525) projected
  line L13 (13.2786, -82.525) -> (13.14, -82.525) projected
  arc A6 (15.796, -87.0713) -> (21.3941, -88.5713) centre (18.796, -87.0713) ccw projected
  point P0 (0, 0)
  point P1 (14.18, -82.7)
  dimension "d64" = 4.3713
sketch "スケッチ10" plane through (0, 3, 0) normal (0, 1, 0) x (1, 0, 0)
  arc A0 (21.3941, 88.5713) -> (15.796, 87.0713) centre (18.796, 87.0713) ccw projected
  line L0 (18.796, 90.0713) -> (25.796, 90.0713)
  line L1 (25.796, 90.0713) -> (25.796, 80.9469)
  line L2 (26.046, 80.5138) -> (21.3941, 88.5713) projected
  line L3 (15.796, 87.0713) -> (15.796, 51.05) projected
  point P0 (0, 0)
  dimension "d65" = 10
extrude "押し出し4" add sketch "スケッチ10" against normal up to surface (1.5 mm away)
fillet "フィレット6" radius 2 1 edges at (25.796, 2.25, -90.0713)
sketch "スケッチ11" plane through (0, 1.5, 0) normal (0, -1, 0) x (1, 0, 0)
  point P0 (0, 0)
sketch "スケッチ12" plane through (0, 1.5, 0) normal (0, -1, 0) x (1, 0, 0)
  circle A0 centre (17.796, -52.05) radius 2
  circle A1 centre (26.3742, -52.05) radius 2
  circle A2 centre (17.796, -82.7003) radius 2
  line L0 (20.796, -46.05) -> (22.3327, -46.05) projected
  line L1 (15.796, -51.05) -> (15.796, -87.0713) projected
  line L2 (26.6628, -48.55) -> (38.7859, -69.5477) projected
  arc A3 (15.796, -87.0713) -> (21.3941, -88.5713) centre (18.796, -87.0713) ccw projected
  arc A4 (15.796, -87.0713) -> (18.796, -90.0713) centre (18.796, -87.0713) ccw projected
  point P0 (0, 0)
  dimension "d69" = 4
  dimension "d70" = 6
  dimension "d71" = 4.371
extrude "押し出し5" add sketch "スケッチ12" along normal blind 1
sketch "スケッチ13" plane through (0, 1.5, 0) normal (0, -1, 0) x (1, 0, 0)
  line L0 (15.796, -87.7003) -> (25.796, -87.7003)
  line L1 (25.796, -87.7003) -> (25.796, -77.7003)
  line L2 (25.796, -77.7003) -> (15.796, -77.7003)
  line L3 (15.796, -77.7003) -> (15.796, -87.7003)
  circle A0 centre (17.796, -82.7003) radius 2 projected
  line L4 (15.796, -50.05) -> (22.796, -50.05)
  line L5 (22.796, -50.05) -> (22.796, -77.7003)
  line L6 (22.796, -77.7003) -> (15.796, -77.7003)
  line L7 (15.796, -77.7003) -> (15.796, -50.05)
  line L8 (15.796, -52.05) -> (15.796, -82.7003) projected
  circle A1 centre (17.796, -52.05) radius 2 projected
  line L9 (25.796, -88.0713) -> (25.796, -80.9469) projected
  line L10 (22.6062, -41.5237) -> (16.544, -45.0237)
  line L11 (16.544, -45.0237) -> (38.2131, -82.5556)
  line L12 (38.2131, -82.5556) -> (44.2753, -79.0556)
  line L13 (44.2753, -79.0556) -> (22.6062, -41.5237)
  line L14 (28.1062, -51.05) -> (38.7859, -69.5477) projected
  line L15 (18.796, -90.0713) -> (23.796, -90.0713) projected
  arc A2 (23.796, -90.0713) -> (25.796, -88.0713) centre (23.796, -88.0713) ccw projected
  line L16 (15.796, -82.7003) -> (15.796, -87.0713) projected
  arc A3 (23.796, -90.0713) -> (25.796, -88.0713) centre (23.796, -88.0713) ccw projected
  line L17 (25.796, -88.0713) -> (25.796, -80.9469) projected
  line L18 (26.046, -80.5138) -> (25.796, -80.9469) projected
  arc A4 (31.9838, -78.2793) -> (26.046, -80.5138) centre (30.3761, -83.0138) ccw projected
  arc A5 (31.9838, -78.2793) -> (37.9215, -76.0448) centre (33.5914, -73.5448) ccw projected
  line L19 (38.7859, -74.5477) -> (37.9215, -76.0448) projected
  arc A6 (38.7859, -74.5477) -> (38.7859, -69.5477) centre (34.4558, -72.0477) ccw projected
  line L20 (28.1062, -51.05) -> (38.7859, -69.5477) projected
  circle A7 centre (26.3742, -52.05) radius 2 projected
  line L21 (26.6628, -48.55) -> (28.1062, -51.05) projected
  arc A8 (26.6628, -48.55) -> (22.3327, -46.05) centre (22.3327, -51.05) ccw projected
  line L22 (20.796, -46.05) -> (22.3327, -46.05) projected
  arc A9 (20.796, -46.05) -> (15.796, -51.05) centre (20.796, -51.05) ccw projected
  line L23 (15.796, -51.05) -> (15.796, -52.05) projected
  circle A10 centre (17.796, -52.05) radius 2 projected
  line L24 (15.796, -52.05) -> (15.796, -82.7003) projected
  circle A11 centre (17.796, -82.7003) radius 2 projected
  line L25 (15.796, -82.7003) -> (15.796, -87.0713) projected
  arc A12 (15.796, -87.0713) -> (18.796, -90.0713) centre (18.796, -87.0713) ccw projected
  line L26 (18.796, -90.0713) -> (23.796, -90.0713) projected
  line L27 (25.796, -77.7003) -> (36.3721, -77.7003)
  circle A13 centre (29.796, -71.7003) radius 1
  point P0 (0, 0)
  point P1 (35.6432, -78.1044)
  point P2 (35.4098, -77.7003)
  dimension "d74" = 5
  dimension "d75" = 10
  dimension "d76" = 7
  dimension "d77" = 7
  dimension "d80" = 7
  dimension "d81" = 6
  dimension "d82" = 2
extrude "押し出し6" cut sketch "スケッチ13" along normal mid plane 10 contours A0 | A12 L3 L2 L1 L0 | L0 L9 A2 L15 A12 | L1 L27 L11 A5 A4 L18 | L27 A5 L11
extrude "押し出し7" add sketch "スケッチ13" along normal blind 1 contours A13
equation "\"d3\" = d2"
equation "\"d7\" = d4"
equation "\"d19\" = d18"
equation "\"d21\" = Thickness"
equation "\"d28\" = Thickness"
equation "\"d30\" = Thickness"
equation "\"d33\" = d32"
equation "\"d34\" = d32"
equation "\"d35\" = d32"
equation "\"d36\" = d32"
equation "\"d37\" = d32"
equation "\"d38\" = d32"
equation "\"d39\" = d32"
equation "\"d40\" = d32"
equation "\"d41\" = Thickness"
equation "\"d45\" = d44"
equation "\"d46\" = d44"
equation "\"d47\" = d44"
equation "\"d48\" = d44"
equation "\"d49\" = d44"
equation "\"d50\" = d44"
equation "\"d51\" = d44"
equation "\"d16\" = Thickness"
equation "\"BendRadius\" = Thickness"
equation "\"BendReliefWidth\" = Thickness"
equation "\"BendReliefDepth\" = 0.5 * Thickness"
equation "\"CornerReliefSize\" = 4 * Thickness"
equation "\"MinimumRemnant\" = 2 * Thickness"
equation "\"TransitionRadius\" = BendRadius"
equation "\"JacobiRadiusSize\" = BendRadius"
equation "\"GapSize\" = Thickness"
equation "\"Thickness\" = 1.5"
properties part number "CORE_hat_outline_typeB_base_ver2"
